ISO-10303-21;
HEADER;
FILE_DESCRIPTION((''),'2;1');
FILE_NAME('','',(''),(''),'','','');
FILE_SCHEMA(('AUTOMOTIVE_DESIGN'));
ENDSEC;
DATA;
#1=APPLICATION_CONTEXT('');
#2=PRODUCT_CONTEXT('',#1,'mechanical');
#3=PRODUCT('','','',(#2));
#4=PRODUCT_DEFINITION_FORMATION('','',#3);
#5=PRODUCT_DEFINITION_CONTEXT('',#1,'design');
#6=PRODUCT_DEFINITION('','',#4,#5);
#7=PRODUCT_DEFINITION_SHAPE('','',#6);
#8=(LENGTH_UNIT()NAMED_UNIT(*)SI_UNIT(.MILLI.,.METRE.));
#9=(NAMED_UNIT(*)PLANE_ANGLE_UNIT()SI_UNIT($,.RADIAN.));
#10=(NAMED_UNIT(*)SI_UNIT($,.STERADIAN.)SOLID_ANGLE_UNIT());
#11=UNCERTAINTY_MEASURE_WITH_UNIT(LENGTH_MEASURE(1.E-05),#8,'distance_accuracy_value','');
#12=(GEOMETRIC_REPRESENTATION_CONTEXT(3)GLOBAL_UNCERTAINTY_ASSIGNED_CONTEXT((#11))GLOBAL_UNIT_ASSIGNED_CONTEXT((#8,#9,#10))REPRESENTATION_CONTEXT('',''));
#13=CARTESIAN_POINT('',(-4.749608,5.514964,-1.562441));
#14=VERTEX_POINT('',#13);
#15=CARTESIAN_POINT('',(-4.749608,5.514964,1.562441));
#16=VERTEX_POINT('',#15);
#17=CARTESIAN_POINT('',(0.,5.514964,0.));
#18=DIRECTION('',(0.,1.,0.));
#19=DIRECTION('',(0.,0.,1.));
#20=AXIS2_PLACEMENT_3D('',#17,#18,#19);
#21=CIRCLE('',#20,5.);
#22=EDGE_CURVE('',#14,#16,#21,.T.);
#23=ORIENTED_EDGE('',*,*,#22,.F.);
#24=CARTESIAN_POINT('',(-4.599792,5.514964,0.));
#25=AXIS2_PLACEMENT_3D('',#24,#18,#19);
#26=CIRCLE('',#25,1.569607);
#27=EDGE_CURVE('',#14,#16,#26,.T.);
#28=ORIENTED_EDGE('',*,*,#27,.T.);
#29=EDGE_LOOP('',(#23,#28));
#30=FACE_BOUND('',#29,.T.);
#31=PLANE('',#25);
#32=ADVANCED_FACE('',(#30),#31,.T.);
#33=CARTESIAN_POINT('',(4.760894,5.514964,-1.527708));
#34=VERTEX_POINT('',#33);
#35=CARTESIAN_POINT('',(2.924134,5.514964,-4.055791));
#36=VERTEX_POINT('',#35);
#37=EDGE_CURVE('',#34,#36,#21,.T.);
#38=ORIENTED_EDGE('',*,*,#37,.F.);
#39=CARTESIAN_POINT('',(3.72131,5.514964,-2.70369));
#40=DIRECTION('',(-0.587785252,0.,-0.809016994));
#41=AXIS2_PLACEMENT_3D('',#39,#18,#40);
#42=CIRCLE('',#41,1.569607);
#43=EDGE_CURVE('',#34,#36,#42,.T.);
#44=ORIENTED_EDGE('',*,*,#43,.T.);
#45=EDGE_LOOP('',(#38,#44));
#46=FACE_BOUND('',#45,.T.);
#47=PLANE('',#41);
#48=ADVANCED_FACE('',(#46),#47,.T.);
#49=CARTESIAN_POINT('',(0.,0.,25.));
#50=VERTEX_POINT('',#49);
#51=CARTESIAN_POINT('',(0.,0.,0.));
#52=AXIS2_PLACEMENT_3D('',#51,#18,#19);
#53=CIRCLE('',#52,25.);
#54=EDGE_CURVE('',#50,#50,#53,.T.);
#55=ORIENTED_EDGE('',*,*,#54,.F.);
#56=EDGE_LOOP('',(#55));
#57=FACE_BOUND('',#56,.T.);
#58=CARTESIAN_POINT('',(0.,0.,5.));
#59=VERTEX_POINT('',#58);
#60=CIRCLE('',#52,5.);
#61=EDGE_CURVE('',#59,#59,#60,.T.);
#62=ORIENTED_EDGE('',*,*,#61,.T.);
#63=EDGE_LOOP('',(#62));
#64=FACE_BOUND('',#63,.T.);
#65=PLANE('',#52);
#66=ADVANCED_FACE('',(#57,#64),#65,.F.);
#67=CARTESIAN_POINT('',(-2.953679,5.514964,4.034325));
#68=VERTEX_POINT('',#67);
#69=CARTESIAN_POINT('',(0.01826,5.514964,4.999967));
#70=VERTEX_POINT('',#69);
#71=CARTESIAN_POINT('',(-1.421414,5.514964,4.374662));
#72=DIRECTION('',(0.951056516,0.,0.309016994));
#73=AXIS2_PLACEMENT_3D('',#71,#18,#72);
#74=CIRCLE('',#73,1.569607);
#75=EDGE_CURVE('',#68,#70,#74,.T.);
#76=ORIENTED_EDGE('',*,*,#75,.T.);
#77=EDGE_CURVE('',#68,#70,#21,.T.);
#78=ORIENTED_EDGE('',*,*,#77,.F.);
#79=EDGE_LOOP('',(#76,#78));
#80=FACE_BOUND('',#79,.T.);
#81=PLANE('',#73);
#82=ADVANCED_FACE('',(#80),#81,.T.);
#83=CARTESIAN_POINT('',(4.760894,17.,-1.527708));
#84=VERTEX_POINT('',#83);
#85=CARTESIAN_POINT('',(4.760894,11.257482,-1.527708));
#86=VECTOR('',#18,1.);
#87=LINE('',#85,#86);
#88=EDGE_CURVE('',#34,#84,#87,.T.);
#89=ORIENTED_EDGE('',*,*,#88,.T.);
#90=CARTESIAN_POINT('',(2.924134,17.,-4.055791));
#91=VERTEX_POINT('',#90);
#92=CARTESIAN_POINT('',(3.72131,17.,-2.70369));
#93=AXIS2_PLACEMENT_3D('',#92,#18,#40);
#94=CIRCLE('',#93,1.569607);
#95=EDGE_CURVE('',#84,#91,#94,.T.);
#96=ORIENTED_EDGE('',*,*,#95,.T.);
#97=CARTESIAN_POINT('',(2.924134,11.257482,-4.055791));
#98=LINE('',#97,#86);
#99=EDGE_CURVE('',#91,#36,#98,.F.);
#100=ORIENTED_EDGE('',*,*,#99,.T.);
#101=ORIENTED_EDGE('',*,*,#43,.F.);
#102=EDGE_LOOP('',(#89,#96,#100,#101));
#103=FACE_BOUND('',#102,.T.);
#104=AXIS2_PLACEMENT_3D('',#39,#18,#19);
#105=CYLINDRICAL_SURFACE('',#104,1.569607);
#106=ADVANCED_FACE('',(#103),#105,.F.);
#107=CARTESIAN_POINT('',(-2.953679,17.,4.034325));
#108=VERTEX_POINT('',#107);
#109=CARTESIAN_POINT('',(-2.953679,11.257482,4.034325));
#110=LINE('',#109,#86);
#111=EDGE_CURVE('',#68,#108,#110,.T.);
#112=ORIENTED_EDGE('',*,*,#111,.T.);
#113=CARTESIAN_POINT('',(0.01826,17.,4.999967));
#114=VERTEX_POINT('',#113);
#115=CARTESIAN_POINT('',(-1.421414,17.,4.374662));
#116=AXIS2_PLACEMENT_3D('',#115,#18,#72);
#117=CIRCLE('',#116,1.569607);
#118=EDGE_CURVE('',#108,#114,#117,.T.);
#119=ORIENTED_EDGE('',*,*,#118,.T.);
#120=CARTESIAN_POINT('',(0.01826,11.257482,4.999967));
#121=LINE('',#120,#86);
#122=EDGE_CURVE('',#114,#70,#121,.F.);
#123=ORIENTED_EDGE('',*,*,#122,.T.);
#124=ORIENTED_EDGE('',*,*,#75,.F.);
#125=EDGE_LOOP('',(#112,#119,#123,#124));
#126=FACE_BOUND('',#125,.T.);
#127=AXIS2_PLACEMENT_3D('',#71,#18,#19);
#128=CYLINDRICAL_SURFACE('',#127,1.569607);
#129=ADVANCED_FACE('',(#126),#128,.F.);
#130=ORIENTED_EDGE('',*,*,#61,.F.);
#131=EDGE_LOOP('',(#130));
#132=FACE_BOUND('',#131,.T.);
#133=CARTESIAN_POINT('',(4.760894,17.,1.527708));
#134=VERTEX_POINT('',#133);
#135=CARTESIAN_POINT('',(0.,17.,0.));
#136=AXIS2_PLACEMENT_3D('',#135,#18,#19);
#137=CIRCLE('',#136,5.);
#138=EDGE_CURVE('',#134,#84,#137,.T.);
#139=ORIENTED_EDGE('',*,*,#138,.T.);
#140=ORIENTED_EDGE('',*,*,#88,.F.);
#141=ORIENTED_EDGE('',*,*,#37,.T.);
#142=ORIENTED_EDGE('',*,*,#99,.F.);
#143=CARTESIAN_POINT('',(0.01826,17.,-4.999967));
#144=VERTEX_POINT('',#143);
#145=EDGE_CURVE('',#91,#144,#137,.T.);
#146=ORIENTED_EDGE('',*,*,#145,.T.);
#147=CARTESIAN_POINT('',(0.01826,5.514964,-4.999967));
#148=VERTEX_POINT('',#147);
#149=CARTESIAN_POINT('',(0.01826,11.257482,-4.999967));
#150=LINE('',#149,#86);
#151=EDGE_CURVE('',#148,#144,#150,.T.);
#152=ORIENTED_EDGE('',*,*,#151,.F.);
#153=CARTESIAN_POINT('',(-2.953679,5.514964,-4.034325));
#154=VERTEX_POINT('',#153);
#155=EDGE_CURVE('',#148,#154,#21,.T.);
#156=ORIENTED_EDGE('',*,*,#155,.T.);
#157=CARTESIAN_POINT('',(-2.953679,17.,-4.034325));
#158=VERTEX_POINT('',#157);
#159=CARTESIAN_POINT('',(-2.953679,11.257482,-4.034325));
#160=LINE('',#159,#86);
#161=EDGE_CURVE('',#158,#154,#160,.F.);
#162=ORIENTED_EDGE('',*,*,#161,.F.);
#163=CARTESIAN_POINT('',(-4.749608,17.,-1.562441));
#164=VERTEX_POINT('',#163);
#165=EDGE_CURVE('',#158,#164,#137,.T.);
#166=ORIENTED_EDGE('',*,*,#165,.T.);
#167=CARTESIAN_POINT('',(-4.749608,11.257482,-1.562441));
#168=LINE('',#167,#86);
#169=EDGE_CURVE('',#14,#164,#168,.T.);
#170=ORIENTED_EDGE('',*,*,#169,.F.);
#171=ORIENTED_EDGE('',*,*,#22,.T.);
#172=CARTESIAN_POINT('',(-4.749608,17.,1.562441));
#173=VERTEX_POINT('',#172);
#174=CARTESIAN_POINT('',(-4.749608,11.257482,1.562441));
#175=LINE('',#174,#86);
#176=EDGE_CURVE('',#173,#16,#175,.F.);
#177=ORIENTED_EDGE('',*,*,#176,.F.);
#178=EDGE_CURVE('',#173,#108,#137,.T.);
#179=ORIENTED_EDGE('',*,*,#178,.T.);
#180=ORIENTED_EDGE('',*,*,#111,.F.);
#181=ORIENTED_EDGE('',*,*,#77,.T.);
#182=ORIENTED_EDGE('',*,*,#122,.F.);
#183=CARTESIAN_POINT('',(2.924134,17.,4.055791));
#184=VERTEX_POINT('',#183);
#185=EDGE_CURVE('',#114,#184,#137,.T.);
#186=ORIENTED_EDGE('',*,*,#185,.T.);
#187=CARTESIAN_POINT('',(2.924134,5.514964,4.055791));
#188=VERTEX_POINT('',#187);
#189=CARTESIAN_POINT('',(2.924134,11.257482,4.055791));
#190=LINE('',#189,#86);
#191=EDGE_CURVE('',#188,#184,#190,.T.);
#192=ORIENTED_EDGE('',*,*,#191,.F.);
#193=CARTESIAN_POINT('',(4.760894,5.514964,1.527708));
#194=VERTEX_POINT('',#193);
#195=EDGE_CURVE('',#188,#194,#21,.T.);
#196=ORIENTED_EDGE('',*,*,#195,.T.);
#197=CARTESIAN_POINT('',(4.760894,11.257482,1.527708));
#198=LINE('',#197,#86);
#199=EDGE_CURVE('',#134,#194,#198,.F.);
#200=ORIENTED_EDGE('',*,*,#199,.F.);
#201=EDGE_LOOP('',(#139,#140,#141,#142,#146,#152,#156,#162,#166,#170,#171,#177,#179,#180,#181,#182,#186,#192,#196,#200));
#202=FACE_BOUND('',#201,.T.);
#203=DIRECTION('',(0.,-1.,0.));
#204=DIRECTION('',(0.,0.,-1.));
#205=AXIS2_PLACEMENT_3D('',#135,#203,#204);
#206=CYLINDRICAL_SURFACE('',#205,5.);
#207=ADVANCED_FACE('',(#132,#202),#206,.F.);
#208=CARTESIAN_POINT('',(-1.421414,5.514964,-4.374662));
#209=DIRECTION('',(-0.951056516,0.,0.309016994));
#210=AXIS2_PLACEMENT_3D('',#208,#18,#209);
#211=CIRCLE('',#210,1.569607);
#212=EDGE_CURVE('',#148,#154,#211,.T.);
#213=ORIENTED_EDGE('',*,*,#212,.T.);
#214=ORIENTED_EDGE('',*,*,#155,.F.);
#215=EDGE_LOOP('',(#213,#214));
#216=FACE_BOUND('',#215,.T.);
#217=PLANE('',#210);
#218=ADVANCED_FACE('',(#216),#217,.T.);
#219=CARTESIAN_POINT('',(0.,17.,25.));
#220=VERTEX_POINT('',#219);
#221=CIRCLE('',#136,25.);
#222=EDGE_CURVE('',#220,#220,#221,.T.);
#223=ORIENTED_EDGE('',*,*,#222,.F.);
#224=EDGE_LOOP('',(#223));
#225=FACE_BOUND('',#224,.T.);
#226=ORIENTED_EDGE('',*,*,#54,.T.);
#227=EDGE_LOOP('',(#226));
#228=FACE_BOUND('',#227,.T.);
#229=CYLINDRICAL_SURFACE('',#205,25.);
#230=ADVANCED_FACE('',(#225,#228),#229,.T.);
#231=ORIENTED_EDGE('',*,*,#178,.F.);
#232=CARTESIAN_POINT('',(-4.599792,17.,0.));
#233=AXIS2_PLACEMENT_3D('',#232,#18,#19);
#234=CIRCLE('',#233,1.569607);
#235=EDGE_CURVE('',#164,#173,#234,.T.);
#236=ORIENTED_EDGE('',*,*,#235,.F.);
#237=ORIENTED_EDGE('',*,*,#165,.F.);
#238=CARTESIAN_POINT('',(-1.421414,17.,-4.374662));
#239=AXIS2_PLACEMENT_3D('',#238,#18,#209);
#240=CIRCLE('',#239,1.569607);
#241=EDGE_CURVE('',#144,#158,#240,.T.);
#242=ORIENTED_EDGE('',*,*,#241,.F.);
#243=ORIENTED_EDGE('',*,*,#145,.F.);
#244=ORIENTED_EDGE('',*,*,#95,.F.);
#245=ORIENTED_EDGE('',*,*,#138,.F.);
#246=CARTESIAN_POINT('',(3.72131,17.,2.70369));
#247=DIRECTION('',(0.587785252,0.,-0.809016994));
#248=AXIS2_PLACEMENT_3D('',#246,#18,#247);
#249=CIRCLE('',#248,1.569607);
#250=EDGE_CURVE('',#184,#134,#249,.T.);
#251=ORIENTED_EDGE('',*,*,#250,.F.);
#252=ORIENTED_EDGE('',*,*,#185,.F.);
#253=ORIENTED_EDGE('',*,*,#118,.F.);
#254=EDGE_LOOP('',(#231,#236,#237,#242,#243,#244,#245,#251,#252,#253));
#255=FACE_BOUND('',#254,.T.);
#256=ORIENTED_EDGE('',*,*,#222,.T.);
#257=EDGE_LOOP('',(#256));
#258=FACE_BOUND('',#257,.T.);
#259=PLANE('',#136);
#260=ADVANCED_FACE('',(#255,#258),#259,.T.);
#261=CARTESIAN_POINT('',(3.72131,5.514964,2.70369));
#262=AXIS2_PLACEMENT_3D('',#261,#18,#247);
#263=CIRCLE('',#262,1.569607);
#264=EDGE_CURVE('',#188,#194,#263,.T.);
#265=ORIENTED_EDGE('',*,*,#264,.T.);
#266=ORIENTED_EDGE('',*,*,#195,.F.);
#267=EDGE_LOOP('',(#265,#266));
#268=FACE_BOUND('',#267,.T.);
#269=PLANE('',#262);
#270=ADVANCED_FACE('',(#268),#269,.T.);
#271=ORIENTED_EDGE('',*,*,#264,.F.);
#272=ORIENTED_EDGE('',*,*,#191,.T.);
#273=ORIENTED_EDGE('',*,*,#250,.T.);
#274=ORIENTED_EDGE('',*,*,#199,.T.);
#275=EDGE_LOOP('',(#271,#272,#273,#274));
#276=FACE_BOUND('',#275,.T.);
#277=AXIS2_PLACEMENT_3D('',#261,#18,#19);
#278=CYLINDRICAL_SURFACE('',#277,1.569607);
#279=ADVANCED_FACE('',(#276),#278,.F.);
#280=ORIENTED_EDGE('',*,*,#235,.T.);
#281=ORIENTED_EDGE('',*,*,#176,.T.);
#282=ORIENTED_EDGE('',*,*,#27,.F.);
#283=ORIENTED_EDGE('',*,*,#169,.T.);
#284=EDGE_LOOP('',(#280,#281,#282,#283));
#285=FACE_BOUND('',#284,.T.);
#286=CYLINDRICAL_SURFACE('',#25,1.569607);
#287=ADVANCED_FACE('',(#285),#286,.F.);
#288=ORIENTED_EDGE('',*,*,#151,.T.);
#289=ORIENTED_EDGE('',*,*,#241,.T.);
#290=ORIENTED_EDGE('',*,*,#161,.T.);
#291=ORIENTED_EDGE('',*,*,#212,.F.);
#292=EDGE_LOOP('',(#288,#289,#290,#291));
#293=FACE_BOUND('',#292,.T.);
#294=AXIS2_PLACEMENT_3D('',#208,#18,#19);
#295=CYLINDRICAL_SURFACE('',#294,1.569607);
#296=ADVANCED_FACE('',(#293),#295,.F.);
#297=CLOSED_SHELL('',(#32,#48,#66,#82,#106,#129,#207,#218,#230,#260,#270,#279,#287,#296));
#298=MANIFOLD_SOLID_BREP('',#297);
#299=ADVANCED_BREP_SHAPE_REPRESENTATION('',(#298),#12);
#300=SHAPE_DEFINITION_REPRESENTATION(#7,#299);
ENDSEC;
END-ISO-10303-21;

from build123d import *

# Parameters (mm, degrees)
SKETCH1_R           = 25
BOSS_EXTRUDE1_DEPTH = 17
SKETCH2_R           = 5
CUT_EXTRUDE1_DEPTH  = 40.230090492
SKETCH3_R           = 1.569607269
CUT_EXTRUDE2_DEPTH  = 11.485036093
CIRPATTERN1_COUNT   = 5


with BuildPart() as part:
    # Sketch1 → Boss-Extrude1 (new body)
    with BuildSketch(Plane(origin=(0, 0, 0), x_dir=(1, 0, 0), z_dir=(0, 1, 0))):
        Circle(SKETCH1_R)
    extrude(amount=BOSS_EXTRUDE1_DEPTH)

    # Sketch2 → Cut-Extrude1 (cut, through all)
    with BuildSketch(Plane(origin=(0, 0, 0), x_dir=(1, 0, 0), z_dir=(0, 1, 0))):
        Circle(SKETCH2_R)
    extrude(amount=CUT_EXTRUDE1_DEPTH, mode=Mode.SUBTRACT)

    # Sketch3 → Cut-Extrude2 (cut)
    with BuildSketch(Plane(origin=(0, 17, 0), x_dir=(1, 0, 0), z_dir=(0, 1, 0))):
        with Locations((-4.59979233, 0)):
            Circle(SKETCH3_R)
    cut_extrude2 = extrude(amount=-CUT_EXTRUDE2_DEPTH, mode=Mode.SUBTRACT)

    # CirPattern1: Cut-Extrude2 ×5 about axis
    cirpattern1_axis = Axis((0, 0, 0), (0, 1, 0))
    for i in range(1, CIRPATTERN1_COUNT):
        add(cut_extrude2.rotate(cirpattern1_axis, i * 360 / CIRPATTERN1_COUNT), mode=Mode.SUBTRACT)


solid = part.part
